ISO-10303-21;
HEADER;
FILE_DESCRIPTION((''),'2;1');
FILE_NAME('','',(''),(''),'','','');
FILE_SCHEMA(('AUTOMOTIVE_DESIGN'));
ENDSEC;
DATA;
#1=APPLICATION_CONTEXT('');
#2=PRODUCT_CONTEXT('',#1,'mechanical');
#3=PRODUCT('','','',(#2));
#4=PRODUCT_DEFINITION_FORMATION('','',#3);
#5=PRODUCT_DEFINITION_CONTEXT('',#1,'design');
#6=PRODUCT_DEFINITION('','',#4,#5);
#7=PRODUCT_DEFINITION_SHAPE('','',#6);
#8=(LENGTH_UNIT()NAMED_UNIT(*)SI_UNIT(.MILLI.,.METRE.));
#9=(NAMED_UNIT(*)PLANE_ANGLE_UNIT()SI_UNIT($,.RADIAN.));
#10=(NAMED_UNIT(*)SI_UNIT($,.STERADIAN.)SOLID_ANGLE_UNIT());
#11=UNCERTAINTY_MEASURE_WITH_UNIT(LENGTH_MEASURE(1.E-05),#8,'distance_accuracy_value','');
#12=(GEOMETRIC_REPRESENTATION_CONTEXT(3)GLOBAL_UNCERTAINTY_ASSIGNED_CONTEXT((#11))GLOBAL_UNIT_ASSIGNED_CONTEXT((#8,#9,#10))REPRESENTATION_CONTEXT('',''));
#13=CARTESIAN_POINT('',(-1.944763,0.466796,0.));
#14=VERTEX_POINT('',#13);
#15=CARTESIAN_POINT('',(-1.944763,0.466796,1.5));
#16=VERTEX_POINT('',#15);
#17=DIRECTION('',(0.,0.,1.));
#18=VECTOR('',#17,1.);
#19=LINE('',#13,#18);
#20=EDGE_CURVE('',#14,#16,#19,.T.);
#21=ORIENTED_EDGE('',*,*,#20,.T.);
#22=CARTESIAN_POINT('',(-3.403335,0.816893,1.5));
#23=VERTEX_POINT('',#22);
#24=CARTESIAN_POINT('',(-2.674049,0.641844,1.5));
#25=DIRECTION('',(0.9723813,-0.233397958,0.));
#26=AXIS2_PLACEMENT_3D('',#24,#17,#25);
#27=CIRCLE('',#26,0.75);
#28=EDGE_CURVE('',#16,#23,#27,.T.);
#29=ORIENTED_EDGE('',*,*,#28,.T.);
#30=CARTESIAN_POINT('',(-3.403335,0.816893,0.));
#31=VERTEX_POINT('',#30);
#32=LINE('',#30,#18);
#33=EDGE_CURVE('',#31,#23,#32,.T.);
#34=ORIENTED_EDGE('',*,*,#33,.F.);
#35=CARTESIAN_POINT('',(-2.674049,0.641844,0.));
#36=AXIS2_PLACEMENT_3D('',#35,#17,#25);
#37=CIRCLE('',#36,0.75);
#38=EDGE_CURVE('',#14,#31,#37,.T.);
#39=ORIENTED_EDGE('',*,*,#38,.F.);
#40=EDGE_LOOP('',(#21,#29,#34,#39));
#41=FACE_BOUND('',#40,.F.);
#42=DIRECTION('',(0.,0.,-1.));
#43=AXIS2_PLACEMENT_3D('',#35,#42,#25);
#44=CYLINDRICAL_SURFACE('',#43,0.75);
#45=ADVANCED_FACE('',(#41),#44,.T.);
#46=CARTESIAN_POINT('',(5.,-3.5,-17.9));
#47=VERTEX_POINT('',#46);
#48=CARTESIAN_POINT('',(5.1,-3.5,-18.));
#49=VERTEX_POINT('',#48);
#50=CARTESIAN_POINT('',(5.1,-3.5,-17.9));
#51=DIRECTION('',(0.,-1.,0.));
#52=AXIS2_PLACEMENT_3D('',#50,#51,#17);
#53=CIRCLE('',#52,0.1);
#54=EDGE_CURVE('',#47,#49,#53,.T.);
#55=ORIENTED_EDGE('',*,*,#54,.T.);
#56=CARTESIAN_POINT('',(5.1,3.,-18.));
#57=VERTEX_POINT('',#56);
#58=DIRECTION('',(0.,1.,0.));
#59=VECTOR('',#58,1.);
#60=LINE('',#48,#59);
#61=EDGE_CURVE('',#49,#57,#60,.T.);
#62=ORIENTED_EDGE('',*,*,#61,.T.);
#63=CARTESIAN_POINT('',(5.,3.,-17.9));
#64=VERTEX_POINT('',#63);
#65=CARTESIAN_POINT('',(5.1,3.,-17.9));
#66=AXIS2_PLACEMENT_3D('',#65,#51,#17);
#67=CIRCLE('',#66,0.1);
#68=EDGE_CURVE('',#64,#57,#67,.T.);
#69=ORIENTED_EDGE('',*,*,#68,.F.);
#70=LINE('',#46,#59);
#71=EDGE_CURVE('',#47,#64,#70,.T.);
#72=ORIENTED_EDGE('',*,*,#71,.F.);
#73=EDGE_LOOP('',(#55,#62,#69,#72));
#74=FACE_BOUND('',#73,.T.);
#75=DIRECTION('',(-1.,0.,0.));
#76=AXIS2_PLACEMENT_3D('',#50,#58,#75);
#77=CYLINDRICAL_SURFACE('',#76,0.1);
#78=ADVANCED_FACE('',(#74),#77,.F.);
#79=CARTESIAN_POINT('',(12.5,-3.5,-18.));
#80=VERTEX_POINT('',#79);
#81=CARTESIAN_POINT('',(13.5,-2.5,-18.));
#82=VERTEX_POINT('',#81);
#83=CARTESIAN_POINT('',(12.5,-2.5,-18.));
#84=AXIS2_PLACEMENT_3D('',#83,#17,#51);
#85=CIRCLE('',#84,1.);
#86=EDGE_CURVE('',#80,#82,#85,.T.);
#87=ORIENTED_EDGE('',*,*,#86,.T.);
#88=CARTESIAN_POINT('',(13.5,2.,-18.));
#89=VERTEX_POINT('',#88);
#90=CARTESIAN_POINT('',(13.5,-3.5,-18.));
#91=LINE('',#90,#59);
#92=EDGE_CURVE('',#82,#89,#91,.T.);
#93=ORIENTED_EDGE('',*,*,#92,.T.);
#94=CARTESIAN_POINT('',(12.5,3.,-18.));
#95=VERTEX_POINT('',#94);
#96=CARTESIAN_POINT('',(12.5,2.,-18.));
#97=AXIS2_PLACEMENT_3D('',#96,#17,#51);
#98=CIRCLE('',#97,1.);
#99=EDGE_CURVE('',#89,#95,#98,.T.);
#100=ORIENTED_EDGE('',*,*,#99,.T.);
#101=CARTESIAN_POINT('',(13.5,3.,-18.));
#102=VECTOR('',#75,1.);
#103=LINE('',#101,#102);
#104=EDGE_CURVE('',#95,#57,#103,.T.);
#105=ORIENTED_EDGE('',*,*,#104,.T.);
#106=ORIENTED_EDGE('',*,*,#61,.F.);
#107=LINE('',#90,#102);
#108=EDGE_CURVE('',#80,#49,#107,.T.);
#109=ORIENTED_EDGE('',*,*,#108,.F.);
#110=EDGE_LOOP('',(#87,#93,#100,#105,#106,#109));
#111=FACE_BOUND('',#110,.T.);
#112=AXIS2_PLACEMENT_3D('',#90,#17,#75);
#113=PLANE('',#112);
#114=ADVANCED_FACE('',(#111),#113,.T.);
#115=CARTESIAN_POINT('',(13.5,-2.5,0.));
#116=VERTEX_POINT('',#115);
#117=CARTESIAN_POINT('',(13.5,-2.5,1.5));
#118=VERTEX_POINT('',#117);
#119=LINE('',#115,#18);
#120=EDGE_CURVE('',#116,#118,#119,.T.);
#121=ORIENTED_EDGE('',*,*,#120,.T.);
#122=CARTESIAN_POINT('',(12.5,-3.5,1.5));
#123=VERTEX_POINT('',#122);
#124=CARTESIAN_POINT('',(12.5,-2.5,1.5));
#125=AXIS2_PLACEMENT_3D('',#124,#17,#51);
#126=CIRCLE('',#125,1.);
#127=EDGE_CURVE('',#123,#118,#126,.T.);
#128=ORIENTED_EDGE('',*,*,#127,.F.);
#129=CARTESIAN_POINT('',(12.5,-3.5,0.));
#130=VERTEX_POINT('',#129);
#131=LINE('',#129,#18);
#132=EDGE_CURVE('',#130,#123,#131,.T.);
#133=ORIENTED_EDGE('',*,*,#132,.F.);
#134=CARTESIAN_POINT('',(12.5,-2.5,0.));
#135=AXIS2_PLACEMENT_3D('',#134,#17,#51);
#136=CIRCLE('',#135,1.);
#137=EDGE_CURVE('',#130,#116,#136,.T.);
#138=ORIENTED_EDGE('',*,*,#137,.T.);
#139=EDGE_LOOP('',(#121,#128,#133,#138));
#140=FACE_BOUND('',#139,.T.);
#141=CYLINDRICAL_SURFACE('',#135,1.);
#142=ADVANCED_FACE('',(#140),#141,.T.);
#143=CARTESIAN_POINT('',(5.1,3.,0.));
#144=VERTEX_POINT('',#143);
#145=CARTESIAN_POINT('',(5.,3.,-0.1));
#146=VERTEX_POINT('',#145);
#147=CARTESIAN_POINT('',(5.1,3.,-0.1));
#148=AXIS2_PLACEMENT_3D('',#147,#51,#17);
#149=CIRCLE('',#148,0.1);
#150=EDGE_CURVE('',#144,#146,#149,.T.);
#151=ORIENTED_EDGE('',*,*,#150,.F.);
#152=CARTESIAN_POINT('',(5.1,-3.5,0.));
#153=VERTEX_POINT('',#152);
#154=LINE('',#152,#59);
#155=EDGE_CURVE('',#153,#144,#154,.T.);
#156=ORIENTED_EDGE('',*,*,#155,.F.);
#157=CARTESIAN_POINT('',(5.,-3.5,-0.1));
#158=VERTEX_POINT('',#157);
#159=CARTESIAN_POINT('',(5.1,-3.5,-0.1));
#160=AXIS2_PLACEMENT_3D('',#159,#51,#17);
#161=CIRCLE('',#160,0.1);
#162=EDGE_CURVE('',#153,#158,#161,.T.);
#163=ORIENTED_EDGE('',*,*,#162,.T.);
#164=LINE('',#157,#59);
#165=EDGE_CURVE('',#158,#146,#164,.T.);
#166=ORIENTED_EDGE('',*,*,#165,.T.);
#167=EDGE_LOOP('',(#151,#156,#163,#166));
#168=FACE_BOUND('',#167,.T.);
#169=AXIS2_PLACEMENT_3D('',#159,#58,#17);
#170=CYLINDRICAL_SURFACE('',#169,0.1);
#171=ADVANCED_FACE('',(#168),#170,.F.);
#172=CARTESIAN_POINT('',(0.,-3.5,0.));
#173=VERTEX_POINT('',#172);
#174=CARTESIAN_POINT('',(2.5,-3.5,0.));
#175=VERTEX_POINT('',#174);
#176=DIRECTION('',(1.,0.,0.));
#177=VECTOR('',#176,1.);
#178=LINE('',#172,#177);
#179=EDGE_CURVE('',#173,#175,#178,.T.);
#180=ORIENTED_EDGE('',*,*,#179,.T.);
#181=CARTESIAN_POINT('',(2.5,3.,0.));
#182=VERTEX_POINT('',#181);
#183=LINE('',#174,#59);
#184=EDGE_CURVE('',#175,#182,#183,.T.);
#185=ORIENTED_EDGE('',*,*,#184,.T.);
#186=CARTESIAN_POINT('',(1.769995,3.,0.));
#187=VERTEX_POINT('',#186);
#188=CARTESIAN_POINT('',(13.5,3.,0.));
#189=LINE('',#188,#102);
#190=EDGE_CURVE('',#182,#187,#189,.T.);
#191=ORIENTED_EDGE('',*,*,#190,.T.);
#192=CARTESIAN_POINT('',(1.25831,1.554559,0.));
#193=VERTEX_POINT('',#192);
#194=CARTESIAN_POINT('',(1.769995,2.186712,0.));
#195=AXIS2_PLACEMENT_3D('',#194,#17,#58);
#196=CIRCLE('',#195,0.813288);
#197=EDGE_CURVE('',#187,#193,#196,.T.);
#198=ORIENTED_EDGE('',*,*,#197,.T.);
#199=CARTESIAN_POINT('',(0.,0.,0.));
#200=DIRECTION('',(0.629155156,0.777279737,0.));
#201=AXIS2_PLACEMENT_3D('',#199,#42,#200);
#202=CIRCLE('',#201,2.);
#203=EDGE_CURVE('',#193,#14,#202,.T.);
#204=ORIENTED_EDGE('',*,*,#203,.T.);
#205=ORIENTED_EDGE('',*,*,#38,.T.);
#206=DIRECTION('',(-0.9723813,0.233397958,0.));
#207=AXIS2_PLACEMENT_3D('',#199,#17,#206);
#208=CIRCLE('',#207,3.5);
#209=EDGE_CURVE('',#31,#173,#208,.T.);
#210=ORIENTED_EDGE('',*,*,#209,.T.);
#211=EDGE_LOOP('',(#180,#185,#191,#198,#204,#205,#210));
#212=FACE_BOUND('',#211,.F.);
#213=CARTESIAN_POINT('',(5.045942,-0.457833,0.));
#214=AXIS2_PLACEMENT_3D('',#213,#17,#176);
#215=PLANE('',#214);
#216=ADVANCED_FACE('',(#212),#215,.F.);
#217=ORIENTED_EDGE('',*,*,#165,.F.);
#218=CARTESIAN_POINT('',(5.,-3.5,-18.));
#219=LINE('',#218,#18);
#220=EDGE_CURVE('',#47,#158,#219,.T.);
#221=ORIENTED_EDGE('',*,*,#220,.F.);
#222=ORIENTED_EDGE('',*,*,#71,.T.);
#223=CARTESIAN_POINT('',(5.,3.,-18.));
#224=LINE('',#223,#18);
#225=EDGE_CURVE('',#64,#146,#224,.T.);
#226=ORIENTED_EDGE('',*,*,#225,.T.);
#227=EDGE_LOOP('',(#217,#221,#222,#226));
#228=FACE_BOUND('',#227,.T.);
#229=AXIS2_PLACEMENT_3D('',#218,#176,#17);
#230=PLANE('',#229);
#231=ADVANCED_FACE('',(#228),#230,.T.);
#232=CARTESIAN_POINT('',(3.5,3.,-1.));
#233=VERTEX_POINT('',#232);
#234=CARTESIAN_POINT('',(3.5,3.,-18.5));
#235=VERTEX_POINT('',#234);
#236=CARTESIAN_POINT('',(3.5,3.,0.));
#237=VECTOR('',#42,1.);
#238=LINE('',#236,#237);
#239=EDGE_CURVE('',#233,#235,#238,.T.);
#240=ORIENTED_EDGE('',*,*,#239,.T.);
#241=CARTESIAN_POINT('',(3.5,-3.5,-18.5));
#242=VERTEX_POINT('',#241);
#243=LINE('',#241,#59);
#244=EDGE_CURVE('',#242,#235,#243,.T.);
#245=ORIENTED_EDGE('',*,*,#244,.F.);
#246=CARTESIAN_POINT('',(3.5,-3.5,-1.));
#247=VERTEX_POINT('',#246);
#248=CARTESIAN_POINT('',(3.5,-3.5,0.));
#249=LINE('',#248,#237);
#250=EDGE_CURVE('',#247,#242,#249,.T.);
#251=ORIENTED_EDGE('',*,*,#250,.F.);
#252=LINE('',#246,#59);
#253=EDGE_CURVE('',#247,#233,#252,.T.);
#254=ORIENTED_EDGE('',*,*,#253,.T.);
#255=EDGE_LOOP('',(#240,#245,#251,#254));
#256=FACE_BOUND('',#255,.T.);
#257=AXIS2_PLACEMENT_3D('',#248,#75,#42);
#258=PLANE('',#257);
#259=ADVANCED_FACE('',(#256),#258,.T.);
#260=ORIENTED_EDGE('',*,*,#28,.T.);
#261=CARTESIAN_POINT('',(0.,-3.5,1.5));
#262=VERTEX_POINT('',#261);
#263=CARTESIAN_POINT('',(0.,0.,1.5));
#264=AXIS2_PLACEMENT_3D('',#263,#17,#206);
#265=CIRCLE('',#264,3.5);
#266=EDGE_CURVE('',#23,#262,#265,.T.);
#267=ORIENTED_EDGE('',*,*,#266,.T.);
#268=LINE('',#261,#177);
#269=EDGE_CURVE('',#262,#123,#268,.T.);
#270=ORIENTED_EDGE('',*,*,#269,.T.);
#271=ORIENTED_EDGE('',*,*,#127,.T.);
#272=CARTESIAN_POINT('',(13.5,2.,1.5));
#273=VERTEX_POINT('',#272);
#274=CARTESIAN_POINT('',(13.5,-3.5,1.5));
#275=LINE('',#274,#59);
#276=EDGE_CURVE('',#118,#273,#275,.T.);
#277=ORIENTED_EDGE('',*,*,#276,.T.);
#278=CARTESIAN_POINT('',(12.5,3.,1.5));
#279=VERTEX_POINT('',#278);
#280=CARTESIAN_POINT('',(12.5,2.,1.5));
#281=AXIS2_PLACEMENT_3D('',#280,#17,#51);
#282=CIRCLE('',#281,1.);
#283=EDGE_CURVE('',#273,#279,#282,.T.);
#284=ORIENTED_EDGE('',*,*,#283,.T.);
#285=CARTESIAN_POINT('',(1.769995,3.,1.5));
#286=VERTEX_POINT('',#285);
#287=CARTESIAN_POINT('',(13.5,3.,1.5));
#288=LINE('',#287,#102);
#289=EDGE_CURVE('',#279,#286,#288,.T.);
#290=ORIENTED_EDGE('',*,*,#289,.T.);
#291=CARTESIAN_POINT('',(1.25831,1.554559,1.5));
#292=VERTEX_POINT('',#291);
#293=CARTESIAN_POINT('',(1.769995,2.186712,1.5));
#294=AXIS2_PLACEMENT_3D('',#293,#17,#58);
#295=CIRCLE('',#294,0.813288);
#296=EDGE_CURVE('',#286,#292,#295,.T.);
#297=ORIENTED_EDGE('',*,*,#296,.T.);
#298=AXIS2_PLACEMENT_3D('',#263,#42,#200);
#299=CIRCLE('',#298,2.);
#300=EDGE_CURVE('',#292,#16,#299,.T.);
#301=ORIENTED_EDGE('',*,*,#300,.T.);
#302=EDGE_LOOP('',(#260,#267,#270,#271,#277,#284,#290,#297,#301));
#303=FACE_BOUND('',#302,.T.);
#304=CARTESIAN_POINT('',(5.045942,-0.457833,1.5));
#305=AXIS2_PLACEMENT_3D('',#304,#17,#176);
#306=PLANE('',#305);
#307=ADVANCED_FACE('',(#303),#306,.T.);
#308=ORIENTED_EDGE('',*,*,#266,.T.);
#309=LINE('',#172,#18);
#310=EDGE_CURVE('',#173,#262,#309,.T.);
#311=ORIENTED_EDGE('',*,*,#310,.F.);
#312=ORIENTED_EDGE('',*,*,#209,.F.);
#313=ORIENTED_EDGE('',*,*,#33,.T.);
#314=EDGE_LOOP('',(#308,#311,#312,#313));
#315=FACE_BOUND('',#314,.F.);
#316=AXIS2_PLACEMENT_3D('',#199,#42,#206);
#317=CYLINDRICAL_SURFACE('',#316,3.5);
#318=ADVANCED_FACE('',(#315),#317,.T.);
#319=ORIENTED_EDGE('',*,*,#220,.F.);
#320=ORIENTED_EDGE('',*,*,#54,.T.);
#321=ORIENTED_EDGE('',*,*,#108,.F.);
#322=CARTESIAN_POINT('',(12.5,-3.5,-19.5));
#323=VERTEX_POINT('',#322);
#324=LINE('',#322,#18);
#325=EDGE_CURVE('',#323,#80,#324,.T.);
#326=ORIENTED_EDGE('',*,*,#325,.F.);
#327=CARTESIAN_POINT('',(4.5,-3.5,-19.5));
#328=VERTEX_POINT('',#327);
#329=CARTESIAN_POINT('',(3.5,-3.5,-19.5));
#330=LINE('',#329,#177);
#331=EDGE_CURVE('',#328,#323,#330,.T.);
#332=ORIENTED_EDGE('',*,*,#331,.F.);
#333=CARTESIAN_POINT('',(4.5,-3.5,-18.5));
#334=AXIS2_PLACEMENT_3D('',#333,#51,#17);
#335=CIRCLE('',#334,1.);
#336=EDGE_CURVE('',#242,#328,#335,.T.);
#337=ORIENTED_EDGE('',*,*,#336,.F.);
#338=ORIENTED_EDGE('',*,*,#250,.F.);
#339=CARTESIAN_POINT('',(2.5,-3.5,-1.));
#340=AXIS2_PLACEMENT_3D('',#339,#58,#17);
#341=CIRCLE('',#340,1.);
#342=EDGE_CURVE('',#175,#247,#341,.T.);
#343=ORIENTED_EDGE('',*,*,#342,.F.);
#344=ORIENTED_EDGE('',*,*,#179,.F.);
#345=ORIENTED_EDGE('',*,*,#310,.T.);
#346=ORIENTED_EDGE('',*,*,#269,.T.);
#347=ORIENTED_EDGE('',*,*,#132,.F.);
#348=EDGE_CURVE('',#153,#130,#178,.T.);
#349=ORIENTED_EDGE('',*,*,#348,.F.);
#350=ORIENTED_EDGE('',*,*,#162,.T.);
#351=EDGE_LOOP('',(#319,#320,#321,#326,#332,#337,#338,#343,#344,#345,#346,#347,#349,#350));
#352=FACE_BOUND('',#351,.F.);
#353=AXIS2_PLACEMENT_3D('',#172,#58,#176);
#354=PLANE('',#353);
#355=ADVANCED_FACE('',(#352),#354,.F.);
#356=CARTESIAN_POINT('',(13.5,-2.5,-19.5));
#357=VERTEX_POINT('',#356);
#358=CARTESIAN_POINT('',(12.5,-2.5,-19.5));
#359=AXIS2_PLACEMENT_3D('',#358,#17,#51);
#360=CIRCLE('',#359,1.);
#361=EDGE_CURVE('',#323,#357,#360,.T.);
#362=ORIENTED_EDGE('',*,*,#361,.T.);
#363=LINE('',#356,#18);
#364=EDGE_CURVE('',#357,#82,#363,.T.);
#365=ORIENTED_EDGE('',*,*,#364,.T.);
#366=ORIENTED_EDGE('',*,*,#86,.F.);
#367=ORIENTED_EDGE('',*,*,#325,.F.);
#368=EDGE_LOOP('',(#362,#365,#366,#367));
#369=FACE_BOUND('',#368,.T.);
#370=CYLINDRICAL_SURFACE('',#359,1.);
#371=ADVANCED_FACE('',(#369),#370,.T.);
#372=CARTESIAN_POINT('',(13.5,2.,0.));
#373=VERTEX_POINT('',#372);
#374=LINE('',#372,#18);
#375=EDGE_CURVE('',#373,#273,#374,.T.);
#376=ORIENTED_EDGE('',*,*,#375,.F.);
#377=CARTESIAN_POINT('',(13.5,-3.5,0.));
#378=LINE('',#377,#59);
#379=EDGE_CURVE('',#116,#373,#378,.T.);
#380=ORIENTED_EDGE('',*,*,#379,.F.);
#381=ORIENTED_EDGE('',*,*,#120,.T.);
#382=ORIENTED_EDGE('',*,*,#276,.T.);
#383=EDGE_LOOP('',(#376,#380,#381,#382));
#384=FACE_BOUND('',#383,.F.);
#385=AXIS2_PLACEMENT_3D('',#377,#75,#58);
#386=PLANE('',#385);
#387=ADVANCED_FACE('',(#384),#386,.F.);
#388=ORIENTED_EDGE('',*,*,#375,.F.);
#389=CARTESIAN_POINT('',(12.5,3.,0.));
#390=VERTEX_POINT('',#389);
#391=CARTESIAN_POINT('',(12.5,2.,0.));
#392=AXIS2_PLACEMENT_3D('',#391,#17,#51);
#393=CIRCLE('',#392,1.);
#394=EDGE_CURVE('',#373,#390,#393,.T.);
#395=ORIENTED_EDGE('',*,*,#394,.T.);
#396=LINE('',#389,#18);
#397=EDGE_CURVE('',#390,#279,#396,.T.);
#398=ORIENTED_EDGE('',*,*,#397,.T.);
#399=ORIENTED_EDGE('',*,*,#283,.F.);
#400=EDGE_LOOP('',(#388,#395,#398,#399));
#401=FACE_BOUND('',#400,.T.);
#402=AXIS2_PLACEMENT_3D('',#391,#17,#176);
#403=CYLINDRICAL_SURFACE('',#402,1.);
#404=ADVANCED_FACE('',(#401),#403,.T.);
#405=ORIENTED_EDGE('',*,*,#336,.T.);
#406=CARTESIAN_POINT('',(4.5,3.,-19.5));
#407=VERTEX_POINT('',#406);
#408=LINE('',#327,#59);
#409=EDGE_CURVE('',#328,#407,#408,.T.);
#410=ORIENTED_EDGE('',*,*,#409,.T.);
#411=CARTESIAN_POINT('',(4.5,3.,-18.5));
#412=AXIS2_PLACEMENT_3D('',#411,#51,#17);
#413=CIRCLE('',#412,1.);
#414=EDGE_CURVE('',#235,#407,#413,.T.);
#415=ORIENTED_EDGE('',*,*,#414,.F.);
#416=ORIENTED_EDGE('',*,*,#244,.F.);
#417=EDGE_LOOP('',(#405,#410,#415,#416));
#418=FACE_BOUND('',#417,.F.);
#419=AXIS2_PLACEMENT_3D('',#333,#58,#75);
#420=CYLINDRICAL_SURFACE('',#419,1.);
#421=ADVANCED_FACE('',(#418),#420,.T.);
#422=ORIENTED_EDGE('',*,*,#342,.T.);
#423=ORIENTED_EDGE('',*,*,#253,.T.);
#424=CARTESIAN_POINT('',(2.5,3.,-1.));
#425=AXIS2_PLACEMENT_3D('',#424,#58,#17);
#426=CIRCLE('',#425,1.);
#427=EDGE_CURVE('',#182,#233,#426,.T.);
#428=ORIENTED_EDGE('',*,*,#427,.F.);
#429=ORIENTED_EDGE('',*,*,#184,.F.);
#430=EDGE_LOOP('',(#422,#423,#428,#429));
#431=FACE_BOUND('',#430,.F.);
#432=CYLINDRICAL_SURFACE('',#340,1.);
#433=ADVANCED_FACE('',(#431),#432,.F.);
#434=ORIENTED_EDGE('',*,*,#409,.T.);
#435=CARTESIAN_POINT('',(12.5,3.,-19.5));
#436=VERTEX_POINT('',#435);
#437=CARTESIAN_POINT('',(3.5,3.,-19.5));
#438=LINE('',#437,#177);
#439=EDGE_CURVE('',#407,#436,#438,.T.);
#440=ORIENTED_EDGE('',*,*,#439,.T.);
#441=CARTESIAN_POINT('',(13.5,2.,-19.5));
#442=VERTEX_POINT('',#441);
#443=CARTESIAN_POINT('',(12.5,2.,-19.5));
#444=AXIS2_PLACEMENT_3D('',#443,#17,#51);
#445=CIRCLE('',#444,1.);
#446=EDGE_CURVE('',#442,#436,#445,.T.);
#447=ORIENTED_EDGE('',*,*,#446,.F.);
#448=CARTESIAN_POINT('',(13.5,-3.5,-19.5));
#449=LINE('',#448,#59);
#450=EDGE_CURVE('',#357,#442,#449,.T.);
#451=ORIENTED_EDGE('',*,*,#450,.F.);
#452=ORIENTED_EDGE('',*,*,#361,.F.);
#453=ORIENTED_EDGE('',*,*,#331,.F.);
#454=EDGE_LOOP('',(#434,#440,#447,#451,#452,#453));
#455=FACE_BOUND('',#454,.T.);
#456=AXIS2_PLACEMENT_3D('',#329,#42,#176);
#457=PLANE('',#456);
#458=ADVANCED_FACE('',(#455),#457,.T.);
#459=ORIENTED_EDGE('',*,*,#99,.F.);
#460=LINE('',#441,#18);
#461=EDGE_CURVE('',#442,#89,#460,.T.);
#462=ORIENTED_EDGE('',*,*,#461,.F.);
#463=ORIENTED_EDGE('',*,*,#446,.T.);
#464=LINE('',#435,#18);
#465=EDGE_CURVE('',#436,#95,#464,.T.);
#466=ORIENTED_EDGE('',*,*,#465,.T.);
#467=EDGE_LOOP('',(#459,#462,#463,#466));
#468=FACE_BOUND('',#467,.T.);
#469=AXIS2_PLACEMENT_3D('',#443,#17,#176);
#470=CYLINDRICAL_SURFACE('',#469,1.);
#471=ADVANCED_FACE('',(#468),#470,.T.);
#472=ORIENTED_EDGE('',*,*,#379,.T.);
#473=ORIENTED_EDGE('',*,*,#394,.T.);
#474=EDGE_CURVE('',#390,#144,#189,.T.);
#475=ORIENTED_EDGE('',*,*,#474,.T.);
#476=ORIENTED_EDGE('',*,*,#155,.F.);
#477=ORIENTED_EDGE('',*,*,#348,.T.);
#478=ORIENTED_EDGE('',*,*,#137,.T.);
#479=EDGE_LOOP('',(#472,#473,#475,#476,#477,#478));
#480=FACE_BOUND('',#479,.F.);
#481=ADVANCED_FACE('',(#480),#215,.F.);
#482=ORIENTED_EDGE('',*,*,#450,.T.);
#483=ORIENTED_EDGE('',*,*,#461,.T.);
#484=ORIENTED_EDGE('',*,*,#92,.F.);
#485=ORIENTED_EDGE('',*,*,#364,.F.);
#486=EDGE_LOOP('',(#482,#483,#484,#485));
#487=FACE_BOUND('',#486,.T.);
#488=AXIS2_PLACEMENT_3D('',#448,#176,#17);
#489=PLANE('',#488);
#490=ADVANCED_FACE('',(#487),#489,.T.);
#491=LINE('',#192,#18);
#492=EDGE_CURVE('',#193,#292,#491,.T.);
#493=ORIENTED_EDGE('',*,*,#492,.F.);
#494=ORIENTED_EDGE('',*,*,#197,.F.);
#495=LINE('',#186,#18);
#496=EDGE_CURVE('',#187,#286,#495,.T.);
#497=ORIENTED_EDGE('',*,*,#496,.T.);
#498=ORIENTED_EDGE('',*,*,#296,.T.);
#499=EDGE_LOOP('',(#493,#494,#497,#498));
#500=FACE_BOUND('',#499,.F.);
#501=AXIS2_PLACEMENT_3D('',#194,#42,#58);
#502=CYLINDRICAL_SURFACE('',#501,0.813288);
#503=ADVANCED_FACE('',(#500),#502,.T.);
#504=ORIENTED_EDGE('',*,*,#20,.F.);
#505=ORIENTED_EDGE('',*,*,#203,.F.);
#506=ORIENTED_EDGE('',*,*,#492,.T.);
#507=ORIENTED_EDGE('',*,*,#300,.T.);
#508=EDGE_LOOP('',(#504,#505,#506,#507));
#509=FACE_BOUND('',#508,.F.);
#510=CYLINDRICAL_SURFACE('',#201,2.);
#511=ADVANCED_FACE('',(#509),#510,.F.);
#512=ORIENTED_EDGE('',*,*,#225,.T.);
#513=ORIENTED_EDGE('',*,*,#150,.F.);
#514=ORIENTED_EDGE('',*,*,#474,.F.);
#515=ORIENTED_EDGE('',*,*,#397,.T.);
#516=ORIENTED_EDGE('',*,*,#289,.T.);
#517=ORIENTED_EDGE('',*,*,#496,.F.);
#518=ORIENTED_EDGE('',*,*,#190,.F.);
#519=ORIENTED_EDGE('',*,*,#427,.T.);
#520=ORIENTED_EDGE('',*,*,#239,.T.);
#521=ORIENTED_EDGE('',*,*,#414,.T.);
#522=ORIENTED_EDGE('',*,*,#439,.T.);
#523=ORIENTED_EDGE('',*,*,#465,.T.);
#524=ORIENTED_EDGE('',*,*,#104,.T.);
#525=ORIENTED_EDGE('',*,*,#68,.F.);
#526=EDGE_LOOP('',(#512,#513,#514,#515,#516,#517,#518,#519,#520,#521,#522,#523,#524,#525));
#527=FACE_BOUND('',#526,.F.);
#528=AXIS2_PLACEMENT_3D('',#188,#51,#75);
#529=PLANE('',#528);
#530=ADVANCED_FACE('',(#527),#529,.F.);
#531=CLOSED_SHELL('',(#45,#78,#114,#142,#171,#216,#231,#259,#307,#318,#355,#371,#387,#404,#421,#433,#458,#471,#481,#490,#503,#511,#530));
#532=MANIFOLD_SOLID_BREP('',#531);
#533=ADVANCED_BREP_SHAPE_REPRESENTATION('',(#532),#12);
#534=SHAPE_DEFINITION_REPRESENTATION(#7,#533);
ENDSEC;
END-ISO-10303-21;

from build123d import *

# Parameters (mm, degrees)
F1_DEPTH = 1.5
F3_DEPTH = 6.5
F4_R     = 0.1
F5_R     = 1
F6_R     = 1


# Not quite as in the source:
# - a feature of the source that left no trace in its solid (it failed there, or was rolled back) is left out


with BuildPart() as f1:
    # F0 (on Top) → F1 (new body)
    with BuildSketch(Plane.XY):
        with BuildLine():
            Line((13.5, -3.5), (13.5, 3))
            Line((13.5, 3), (1.7699947357, 3))
            ThreePointArc((1.7699947357, 3), (1.00332674, 2.4581115268), (1.2583103115, 1.5545594745))
            ThreePointArc((1.2583103115, 1.5545594745), (0.6431264076, -1.8937762339), (-1.9447626006, 0.466795916))
            ThreePointArc((-1.9447626006, 0.466795916), (-2.4990001073, 1.3711303598), (-3.4033345511, 0.8168928531))
            ThreePointArc((-3.4033345511, 0.8168928531), (-2.748556438, -2.1668958229), (0, -3.5))
            Line((0, -3.5), (1.7699947357, -3.5))
            Line((1.7699947357, -3.5), (13.5, -3.5))
        make_face()
    extrude(amount=F1_DEPTH)

    # F2 (on face) → F3 (join, through all)
    with BuildSketch(Plane.XZ.offset(3.5)):
        Polygon((5, 0), (3.5, 0), (3.5, -19.5), (13.5, -19.5), (13.5, -18), (5, -18), align=None)
    extrude(amount=-F3_DEPTH)

    # F4
    f4_edges = [f1.edges().sort_by_distance(p)[0] for p in [
        (5, -0.25, 0),
        (5, -0.25, -18),
    ]]
    fillet(f4_edges, radius=F4_R)

    # F5
    f5_edges = [f1.edges().sort_by_distance(p)[0] for p in [
        (3.5, -0.25, 0),
        (3.5, -0.25, -19.5),
    ]]
    fillet(f5_edges, radius=F5_R)

    # F6
    f6_edges = [f1.edges().sort_by_distance(p)[0] for p in [
        (13.5, -3.5, -18.75),
        (13.5, 3, -18.75),
        (13.5, -3.5, 0.75),
        (13.5, 3, 0.75),
    ]]
    fillet(f6_edges, radius=F6_R)


solid = f1.part
